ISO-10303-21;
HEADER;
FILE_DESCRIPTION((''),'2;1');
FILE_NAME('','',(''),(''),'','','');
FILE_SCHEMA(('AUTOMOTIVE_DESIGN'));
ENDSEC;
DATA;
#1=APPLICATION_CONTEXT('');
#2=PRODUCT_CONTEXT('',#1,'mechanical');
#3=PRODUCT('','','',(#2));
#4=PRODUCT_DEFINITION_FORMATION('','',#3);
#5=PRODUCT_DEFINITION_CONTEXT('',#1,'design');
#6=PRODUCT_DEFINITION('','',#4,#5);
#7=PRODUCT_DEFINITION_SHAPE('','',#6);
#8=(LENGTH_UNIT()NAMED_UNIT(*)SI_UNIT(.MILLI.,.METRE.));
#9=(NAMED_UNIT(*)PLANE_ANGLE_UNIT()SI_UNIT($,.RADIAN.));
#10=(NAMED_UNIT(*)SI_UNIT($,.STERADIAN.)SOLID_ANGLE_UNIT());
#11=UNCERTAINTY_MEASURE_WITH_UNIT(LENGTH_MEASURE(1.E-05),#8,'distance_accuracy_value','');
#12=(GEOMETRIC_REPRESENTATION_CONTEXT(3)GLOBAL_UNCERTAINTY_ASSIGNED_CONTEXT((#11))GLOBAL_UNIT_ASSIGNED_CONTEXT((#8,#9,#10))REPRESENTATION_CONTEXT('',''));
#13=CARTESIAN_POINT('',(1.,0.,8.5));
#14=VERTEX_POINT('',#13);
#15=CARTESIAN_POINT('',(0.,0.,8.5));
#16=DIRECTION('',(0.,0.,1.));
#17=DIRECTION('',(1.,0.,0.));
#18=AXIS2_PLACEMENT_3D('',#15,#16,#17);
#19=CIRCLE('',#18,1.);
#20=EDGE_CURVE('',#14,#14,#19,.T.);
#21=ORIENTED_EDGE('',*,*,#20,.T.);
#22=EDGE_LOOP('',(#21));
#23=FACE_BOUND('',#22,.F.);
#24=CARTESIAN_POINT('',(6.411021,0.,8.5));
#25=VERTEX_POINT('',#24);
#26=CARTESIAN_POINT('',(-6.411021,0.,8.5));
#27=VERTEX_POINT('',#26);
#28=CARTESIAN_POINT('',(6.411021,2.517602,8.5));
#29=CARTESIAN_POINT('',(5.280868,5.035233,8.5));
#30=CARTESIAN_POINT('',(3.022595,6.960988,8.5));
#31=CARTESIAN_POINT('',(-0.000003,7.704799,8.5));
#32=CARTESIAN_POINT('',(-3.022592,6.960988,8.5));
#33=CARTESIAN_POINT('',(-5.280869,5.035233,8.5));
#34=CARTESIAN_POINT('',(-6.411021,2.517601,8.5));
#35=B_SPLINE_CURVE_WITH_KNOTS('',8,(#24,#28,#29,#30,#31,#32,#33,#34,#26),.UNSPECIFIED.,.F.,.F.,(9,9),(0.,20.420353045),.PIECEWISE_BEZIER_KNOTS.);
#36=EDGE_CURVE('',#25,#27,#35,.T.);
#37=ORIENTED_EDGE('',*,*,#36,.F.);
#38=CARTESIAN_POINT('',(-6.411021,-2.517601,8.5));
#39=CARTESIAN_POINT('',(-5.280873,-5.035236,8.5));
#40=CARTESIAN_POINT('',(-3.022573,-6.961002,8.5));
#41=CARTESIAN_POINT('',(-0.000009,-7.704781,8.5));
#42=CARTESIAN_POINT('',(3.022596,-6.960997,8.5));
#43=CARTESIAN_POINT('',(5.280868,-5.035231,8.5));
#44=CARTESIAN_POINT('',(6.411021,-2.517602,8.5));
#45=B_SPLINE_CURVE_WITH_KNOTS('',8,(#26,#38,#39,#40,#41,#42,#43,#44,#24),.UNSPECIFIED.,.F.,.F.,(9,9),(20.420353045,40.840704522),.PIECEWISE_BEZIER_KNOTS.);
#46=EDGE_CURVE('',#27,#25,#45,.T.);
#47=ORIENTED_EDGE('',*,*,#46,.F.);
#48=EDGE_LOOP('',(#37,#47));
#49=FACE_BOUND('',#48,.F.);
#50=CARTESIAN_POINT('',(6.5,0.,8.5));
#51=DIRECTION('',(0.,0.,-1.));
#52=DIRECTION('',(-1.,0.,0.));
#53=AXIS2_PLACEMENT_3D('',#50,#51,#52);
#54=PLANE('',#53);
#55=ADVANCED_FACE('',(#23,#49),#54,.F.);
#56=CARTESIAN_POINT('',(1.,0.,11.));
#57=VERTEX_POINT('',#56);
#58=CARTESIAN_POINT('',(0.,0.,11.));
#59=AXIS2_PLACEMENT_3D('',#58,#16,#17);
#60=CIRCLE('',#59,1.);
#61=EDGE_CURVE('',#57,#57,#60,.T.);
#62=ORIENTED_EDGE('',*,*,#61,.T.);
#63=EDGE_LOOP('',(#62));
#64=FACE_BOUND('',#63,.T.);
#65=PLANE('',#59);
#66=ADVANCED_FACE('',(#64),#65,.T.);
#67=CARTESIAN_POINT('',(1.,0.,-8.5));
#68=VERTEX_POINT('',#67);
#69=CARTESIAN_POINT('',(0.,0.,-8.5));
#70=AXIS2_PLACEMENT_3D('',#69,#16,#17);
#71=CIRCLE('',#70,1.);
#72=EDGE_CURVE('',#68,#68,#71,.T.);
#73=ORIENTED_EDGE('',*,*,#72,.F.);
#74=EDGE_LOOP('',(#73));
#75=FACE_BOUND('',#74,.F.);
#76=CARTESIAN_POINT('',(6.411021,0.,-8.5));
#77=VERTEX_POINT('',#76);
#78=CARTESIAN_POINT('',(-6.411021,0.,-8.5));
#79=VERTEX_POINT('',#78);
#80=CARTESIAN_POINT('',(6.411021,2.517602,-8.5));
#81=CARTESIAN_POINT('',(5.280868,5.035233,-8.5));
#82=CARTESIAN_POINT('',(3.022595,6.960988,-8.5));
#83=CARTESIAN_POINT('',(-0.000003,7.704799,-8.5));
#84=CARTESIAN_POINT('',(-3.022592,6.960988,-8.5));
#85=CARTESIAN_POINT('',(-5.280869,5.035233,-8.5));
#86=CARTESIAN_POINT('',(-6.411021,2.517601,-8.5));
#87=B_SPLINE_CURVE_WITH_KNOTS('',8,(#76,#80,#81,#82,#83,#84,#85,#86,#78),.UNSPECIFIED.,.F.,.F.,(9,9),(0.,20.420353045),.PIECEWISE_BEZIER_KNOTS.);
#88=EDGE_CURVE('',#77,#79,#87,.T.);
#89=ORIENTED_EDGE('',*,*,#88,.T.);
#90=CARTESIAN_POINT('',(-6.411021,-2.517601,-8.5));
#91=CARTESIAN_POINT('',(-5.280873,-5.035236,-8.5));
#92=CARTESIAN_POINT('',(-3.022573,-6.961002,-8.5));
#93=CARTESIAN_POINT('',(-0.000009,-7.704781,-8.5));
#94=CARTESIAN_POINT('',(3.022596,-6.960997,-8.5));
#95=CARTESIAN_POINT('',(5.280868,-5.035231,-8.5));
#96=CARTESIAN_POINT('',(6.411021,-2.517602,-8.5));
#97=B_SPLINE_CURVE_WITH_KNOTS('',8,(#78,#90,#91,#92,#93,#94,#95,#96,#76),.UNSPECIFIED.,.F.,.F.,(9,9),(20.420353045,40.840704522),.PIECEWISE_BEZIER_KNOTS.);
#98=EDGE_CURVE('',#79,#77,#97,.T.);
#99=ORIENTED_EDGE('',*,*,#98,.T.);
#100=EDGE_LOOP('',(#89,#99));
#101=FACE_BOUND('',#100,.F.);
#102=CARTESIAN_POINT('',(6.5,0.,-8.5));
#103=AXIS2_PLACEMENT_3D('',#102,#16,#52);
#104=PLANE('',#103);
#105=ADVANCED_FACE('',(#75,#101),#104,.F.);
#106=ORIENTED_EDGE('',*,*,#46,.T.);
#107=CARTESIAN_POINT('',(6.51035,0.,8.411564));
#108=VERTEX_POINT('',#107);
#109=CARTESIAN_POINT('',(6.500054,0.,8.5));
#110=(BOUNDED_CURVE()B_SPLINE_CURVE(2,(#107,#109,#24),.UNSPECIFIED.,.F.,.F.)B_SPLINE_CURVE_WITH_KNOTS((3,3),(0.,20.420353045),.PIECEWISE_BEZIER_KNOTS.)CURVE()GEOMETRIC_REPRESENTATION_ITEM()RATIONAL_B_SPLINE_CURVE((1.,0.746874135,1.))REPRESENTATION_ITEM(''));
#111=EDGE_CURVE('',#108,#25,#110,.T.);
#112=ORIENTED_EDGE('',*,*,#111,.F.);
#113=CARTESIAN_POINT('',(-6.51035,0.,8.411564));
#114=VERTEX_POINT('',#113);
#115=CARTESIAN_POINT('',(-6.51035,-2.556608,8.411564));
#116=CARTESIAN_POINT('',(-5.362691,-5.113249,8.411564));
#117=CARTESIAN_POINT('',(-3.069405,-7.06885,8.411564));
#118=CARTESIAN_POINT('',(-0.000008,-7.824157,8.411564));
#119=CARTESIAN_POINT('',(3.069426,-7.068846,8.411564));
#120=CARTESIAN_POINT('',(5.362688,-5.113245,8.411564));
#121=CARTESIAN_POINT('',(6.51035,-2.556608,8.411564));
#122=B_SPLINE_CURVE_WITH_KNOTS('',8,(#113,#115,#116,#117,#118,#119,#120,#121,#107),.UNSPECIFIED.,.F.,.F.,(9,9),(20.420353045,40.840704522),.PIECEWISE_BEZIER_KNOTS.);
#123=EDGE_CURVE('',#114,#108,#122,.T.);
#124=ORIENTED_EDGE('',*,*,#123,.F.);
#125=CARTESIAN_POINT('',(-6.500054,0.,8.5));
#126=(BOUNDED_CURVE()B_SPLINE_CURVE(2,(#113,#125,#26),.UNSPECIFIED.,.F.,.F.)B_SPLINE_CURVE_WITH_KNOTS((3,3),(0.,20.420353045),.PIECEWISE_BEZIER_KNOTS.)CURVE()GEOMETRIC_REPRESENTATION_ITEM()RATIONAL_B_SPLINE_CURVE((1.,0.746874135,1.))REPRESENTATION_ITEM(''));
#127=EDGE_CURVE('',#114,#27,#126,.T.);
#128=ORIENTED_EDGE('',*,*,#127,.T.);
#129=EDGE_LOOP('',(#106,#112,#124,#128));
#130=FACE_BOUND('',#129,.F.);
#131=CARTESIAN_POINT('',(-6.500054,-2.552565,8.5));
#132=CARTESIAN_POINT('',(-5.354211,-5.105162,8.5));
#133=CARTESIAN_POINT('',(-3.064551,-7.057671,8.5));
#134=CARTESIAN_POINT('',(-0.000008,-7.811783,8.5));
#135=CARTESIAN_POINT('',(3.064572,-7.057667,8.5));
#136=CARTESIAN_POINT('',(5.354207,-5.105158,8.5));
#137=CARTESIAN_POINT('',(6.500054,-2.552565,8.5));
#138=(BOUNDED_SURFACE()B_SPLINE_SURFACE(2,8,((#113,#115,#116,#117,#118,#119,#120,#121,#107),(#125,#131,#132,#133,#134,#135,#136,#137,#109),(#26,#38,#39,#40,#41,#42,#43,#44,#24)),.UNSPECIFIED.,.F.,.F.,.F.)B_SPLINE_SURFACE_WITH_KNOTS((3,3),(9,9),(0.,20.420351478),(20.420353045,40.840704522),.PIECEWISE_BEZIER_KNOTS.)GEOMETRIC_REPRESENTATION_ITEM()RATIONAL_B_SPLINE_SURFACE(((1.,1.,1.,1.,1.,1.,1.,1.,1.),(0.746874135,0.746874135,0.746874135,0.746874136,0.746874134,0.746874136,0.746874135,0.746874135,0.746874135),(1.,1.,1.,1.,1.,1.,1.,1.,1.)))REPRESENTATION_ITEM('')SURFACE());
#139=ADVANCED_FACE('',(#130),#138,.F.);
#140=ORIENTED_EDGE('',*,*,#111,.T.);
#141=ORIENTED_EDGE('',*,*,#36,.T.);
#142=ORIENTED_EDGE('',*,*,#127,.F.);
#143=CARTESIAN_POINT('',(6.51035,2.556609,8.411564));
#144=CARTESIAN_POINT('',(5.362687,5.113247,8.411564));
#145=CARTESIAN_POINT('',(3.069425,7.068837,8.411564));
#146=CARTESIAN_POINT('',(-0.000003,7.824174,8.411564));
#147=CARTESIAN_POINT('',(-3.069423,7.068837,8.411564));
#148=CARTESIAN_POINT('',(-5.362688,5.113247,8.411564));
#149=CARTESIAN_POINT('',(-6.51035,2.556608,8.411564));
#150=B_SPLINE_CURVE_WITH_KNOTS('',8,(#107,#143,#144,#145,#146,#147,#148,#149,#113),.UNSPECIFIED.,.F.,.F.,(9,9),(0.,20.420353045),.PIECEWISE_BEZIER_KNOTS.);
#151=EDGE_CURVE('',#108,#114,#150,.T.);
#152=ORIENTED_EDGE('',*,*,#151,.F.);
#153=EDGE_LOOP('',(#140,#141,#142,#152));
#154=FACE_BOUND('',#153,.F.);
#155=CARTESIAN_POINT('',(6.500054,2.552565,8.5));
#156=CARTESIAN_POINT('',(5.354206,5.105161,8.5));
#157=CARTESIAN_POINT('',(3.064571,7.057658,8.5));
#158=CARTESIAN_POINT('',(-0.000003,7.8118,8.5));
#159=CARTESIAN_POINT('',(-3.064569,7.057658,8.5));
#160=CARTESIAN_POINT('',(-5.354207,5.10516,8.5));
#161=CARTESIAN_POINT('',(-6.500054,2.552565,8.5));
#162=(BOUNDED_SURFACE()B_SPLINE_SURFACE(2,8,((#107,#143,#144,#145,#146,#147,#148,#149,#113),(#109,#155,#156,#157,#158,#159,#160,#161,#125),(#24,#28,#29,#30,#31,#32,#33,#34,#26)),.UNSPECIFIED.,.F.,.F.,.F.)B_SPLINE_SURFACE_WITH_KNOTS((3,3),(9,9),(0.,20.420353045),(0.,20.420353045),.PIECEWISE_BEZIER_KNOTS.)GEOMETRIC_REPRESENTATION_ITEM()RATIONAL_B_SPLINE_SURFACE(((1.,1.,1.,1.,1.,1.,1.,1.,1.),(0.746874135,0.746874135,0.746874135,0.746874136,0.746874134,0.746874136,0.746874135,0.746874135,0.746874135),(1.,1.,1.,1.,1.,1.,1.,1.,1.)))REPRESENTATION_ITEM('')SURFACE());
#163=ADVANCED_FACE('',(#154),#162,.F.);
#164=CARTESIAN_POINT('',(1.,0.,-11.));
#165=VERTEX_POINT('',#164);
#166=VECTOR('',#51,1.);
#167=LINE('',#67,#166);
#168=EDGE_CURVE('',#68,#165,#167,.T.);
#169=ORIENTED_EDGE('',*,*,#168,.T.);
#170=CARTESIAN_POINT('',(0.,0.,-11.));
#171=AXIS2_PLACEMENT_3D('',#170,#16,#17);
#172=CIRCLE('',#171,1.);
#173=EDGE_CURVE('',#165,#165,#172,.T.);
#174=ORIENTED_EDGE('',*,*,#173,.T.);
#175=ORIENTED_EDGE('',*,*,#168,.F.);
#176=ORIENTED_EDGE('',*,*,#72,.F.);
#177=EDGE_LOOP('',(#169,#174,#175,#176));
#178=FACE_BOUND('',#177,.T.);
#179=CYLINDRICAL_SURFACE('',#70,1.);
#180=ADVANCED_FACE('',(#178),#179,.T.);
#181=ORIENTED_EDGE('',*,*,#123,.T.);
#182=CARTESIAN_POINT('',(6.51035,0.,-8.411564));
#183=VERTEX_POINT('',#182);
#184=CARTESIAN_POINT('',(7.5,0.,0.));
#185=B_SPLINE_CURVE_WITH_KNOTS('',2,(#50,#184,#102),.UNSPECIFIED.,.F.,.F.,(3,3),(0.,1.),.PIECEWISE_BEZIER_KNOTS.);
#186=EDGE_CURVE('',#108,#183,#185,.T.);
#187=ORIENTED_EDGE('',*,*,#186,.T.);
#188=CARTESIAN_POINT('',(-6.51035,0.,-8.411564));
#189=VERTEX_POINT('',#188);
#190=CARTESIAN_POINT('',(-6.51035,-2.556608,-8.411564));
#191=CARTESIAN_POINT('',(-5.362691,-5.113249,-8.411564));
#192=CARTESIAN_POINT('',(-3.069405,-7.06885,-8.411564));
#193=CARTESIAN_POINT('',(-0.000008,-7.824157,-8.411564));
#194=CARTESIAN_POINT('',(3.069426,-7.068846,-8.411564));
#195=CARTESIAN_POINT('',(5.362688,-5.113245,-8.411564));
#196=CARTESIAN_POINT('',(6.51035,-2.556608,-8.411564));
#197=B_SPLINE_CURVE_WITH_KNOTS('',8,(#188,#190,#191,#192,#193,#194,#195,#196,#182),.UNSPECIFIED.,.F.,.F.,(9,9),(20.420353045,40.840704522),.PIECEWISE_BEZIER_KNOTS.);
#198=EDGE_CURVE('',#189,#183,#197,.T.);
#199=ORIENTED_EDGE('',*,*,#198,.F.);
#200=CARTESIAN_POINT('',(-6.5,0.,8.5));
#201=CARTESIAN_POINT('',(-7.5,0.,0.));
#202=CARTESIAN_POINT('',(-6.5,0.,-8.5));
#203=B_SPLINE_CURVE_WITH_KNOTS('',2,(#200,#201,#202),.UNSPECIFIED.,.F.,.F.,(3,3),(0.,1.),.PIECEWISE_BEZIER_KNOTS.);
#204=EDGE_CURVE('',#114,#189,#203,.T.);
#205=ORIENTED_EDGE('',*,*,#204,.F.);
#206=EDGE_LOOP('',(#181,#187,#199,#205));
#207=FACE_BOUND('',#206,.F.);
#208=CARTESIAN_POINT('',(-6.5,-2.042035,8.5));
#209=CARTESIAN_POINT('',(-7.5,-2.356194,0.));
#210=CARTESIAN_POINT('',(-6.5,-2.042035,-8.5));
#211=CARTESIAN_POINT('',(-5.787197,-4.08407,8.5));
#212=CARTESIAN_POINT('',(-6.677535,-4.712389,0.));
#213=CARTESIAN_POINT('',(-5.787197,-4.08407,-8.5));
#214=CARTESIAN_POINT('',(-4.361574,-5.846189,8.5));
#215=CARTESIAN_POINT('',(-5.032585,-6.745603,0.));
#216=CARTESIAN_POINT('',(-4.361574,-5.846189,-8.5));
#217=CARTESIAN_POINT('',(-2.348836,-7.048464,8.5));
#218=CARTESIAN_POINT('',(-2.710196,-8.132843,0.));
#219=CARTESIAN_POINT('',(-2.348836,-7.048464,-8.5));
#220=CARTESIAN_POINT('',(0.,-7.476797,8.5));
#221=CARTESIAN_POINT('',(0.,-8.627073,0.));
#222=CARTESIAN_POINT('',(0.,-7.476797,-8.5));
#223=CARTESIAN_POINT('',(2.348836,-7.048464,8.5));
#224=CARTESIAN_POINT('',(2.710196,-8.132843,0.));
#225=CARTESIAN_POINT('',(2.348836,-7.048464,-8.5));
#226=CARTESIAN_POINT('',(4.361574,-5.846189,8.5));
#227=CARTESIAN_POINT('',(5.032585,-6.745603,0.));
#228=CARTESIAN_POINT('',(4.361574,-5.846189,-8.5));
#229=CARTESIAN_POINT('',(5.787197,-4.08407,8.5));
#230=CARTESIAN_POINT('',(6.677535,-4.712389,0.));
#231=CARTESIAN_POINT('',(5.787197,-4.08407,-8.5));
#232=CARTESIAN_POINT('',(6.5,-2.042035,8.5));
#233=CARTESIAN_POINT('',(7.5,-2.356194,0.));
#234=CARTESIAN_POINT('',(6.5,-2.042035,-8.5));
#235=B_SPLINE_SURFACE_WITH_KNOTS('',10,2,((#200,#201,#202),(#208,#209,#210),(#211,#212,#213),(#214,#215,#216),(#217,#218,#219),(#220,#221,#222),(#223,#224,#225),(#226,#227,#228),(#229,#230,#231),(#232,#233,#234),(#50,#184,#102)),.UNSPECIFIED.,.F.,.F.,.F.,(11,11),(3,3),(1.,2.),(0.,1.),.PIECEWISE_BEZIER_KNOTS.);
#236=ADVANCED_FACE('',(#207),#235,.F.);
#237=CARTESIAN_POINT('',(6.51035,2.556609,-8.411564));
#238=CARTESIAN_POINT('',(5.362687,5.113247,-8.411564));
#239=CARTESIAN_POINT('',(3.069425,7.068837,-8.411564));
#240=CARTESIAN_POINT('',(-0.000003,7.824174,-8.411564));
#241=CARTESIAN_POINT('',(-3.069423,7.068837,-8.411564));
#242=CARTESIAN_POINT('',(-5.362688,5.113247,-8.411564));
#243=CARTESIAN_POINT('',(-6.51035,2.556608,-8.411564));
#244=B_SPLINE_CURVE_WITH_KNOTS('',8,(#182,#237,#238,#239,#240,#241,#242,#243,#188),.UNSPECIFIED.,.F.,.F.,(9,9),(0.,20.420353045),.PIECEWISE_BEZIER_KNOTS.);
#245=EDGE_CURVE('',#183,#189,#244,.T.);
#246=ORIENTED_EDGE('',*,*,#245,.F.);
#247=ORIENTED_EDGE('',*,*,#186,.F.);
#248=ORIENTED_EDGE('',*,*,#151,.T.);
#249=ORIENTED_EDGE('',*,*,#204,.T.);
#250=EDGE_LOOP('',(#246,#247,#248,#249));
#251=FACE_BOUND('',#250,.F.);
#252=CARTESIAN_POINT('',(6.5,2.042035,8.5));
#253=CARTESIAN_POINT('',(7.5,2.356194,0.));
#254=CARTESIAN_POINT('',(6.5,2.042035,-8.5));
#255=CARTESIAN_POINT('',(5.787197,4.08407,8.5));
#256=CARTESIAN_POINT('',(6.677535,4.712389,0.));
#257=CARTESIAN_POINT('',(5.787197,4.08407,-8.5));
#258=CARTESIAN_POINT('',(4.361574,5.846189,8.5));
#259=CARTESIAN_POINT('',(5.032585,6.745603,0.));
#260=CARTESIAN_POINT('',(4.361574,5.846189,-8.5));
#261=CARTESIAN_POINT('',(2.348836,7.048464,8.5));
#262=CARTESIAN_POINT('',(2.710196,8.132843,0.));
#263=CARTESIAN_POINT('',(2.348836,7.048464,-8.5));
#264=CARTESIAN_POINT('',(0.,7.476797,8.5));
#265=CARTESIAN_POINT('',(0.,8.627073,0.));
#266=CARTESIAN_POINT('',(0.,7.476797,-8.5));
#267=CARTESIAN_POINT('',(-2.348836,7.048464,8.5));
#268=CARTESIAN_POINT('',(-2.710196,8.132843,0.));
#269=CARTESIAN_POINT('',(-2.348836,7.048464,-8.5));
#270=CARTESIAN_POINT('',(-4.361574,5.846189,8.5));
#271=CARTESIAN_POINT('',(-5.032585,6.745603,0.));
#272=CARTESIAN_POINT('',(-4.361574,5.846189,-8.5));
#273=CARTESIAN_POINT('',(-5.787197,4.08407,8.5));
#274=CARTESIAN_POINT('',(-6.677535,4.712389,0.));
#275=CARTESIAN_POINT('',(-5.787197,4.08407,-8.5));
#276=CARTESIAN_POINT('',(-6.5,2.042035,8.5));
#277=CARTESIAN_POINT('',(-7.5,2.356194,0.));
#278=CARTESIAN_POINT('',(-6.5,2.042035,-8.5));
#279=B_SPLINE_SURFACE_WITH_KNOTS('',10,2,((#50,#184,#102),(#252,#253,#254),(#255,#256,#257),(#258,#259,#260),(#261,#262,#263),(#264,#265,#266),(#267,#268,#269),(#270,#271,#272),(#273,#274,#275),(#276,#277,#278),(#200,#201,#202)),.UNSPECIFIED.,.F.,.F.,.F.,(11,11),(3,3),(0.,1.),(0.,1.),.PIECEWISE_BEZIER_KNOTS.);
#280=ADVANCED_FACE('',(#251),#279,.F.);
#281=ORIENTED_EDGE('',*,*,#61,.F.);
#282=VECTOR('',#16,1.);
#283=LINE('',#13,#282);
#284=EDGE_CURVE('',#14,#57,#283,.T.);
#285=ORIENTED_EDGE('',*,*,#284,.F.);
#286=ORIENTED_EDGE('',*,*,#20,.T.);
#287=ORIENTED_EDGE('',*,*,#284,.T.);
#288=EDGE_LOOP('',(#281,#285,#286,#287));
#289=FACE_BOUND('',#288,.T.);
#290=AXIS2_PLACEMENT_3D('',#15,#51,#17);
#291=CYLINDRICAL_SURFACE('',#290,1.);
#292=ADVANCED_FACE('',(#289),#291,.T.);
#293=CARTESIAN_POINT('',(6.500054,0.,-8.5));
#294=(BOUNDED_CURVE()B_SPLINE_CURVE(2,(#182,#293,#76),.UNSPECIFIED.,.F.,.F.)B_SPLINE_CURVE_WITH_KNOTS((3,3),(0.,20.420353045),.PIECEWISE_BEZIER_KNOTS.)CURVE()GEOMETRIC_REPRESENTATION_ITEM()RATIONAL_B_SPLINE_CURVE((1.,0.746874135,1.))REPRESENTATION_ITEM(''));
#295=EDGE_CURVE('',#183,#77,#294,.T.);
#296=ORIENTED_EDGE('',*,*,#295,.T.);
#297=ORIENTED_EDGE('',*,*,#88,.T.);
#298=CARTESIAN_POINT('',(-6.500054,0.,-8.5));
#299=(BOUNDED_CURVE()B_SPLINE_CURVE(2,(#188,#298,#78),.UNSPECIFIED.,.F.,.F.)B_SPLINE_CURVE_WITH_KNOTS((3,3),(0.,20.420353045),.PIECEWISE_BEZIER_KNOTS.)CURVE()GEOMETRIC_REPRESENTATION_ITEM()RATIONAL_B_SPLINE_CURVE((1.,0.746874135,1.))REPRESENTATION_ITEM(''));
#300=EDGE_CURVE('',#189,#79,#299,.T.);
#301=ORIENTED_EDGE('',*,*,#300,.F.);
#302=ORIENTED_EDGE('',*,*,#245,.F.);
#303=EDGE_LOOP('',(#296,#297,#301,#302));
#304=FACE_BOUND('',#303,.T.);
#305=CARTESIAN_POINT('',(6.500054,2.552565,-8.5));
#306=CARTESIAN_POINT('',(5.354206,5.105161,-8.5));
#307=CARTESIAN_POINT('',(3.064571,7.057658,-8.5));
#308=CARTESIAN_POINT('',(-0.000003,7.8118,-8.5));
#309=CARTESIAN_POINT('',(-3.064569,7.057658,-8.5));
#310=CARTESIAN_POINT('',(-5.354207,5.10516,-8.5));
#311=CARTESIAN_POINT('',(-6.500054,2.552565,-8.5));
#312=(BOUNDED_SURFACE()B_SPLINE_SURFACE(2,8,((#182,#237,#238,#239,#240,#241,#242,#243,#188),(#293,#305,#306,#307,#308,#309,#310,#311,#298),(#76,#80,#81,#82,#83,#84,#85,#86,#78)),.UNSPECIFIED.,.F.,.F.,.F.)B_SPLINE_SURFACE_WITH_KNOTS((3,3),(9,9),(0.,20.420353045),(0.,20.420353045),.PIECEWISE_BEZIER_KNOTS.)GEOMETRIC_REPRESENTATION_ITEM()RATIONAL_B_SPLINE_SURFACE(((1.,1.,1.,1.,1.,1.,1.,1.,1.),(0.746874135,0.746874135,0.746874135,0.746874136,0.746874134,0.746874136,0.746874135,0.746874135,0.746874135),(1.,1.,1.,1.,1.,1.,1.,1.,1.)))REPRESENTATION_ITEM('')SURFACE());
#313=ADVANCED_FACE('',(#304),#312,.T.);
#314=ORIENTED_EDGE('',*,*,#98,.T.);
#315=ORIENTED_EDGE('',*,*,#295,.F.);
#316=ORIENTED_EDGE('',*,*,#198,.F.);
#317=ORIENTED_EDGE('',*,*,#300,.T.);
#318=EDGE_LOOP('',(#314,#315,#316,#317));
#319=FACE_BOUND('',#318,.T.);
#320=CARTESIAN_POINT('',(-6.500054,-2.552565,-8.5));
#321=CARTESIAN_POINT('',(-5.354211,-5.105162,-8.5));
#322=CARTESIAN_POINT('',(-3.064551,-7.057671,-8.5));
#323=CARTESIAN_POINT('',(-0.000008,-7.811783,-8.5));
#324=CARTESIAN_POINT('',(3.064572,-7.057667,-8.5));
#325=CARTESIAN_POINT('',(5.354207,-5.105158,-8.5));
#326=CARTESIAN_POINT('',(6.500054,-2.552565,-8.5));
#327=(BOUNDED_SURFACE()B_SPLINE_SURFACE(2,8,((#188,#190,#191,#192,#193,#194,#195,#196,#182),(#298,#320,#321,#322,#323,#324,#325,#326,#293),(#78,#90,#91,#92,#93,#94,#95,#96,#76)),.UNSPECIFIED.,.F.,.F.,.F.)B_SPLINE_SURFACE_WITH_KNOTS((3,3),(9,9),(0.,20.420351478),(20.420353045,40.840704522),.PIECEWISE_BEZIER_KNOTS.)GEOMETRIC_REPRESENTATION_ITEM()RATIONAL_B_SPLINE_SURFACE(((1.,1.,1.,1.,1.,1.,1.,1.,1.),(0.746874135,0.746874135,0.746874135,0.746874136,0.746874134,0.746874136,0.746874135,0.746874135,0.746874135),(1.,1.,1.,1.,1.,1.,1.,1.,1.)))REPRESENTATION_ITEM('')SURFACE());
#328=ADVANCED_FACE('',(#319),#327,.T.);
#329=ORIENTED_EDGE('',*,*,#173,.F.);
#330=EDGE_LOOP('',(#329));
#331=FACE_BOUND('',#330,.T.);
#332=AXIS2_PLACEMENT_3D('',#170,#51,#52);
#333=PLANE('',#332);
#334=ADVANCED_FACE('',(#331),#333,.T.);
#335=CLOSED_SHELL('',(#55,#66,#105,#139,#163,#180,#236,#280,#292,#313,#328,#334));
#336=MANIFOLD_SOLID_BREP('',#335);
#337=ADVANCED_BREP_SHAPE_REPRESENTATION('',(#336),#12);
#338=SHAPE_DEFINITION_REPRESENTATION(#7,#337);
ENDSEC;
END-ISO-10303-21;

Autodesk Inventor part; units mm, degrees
ref_plane "YZ Plane" through (0, 0, 0) normal (1, 0, 0) x (0, 1, 0)
ref_plane "XZ Plane" through (0, 0, 0) normal (0, 1, 0) x (-1, 0, 0)
sketch "Sketch1" plane through (0, 0, 0) normal (1, 0, 0) x (0, 1, 0)
  line L0 (0, 0) -> (0, -8.5)
  line L1 (0, 0) -> (0, 8.5)
  dimension "d0" = 8.5
  dimension "d1" = 8.5
ref_plane "Work Plane3" through (0, 0, 0) normal (0, 0, 1) x (1, 0, 0)
ref_plane "Work Plane1" through (0, 0, 8.5) normal (0, 0, 1) x (1, 0, 0)
ref_plane "Work Plane2" through (0, 0, -8.5) normal (0, 0, -1) x (-1, 0, 0)
sketch "Sketch2" plane through (0, 0, 8.5) normal (0, 0, 1) x (1, 0, 0)
  circle A0 centre (0, 0) radius 6.5
  dimension "d2" = 13
sketch "Sketch3" plane through (0, 0, 0) normal (0, 0, 1) x (1, 0, 0)
  circle A0 centre (0, 0) radius 7
  dimension "d3" = 14
sketch "Sketch4" plane through (0, 0, -8.5) normal (0, 0, -1) x (-1, 0, 0)
  circle A0 centre (0, 0) radius 6.5
  dimension "d4" = 13
loft "Loft1" add profiles "Sketch2", "Sketch3", "Sketch4"
fillet "Fillet1" radius 0.1 4 edges at (0, 6.5, 8.5) (0, -6.5, 8.5) (0, 6.5, -8.5) (0, -6.5, -8.5)
sketch "Sketch5" plane through (0.0059, 0.0026, 8.5) normal (0, 0, 1) x (1, 0, 0)
  circle A0 centre (-0.0059, -0.0026) radius 1
  dimension "d12" = 2
extrude "Extrusion1" add sketch "Sketch5" along normal blind 4.2
mirror "Mirror1" about plane through (0, 0, 0) normal (0, 0, 1) of "Extrusion1"
sketch "Sketch6" plane through (0, 0, 12.7) normal (0, 0, 1) x (1, 0, 0)
  circle A0 centre (0, 0) radius 1 projected
extrude "Extrusion2" cut sketch "Sketch6" against normal blind 1.7
sketch "Sketch7" plane through (0, 0, -12.7) normal (0, 0, -1) x (-1, 0, 0)
  circle A0 centre (0, 0) radius 1 projected
extrude "Extrusion3" cut sketch "Sketch7" against normal blind 1.7
properties part number "Mechnum small wheel"
